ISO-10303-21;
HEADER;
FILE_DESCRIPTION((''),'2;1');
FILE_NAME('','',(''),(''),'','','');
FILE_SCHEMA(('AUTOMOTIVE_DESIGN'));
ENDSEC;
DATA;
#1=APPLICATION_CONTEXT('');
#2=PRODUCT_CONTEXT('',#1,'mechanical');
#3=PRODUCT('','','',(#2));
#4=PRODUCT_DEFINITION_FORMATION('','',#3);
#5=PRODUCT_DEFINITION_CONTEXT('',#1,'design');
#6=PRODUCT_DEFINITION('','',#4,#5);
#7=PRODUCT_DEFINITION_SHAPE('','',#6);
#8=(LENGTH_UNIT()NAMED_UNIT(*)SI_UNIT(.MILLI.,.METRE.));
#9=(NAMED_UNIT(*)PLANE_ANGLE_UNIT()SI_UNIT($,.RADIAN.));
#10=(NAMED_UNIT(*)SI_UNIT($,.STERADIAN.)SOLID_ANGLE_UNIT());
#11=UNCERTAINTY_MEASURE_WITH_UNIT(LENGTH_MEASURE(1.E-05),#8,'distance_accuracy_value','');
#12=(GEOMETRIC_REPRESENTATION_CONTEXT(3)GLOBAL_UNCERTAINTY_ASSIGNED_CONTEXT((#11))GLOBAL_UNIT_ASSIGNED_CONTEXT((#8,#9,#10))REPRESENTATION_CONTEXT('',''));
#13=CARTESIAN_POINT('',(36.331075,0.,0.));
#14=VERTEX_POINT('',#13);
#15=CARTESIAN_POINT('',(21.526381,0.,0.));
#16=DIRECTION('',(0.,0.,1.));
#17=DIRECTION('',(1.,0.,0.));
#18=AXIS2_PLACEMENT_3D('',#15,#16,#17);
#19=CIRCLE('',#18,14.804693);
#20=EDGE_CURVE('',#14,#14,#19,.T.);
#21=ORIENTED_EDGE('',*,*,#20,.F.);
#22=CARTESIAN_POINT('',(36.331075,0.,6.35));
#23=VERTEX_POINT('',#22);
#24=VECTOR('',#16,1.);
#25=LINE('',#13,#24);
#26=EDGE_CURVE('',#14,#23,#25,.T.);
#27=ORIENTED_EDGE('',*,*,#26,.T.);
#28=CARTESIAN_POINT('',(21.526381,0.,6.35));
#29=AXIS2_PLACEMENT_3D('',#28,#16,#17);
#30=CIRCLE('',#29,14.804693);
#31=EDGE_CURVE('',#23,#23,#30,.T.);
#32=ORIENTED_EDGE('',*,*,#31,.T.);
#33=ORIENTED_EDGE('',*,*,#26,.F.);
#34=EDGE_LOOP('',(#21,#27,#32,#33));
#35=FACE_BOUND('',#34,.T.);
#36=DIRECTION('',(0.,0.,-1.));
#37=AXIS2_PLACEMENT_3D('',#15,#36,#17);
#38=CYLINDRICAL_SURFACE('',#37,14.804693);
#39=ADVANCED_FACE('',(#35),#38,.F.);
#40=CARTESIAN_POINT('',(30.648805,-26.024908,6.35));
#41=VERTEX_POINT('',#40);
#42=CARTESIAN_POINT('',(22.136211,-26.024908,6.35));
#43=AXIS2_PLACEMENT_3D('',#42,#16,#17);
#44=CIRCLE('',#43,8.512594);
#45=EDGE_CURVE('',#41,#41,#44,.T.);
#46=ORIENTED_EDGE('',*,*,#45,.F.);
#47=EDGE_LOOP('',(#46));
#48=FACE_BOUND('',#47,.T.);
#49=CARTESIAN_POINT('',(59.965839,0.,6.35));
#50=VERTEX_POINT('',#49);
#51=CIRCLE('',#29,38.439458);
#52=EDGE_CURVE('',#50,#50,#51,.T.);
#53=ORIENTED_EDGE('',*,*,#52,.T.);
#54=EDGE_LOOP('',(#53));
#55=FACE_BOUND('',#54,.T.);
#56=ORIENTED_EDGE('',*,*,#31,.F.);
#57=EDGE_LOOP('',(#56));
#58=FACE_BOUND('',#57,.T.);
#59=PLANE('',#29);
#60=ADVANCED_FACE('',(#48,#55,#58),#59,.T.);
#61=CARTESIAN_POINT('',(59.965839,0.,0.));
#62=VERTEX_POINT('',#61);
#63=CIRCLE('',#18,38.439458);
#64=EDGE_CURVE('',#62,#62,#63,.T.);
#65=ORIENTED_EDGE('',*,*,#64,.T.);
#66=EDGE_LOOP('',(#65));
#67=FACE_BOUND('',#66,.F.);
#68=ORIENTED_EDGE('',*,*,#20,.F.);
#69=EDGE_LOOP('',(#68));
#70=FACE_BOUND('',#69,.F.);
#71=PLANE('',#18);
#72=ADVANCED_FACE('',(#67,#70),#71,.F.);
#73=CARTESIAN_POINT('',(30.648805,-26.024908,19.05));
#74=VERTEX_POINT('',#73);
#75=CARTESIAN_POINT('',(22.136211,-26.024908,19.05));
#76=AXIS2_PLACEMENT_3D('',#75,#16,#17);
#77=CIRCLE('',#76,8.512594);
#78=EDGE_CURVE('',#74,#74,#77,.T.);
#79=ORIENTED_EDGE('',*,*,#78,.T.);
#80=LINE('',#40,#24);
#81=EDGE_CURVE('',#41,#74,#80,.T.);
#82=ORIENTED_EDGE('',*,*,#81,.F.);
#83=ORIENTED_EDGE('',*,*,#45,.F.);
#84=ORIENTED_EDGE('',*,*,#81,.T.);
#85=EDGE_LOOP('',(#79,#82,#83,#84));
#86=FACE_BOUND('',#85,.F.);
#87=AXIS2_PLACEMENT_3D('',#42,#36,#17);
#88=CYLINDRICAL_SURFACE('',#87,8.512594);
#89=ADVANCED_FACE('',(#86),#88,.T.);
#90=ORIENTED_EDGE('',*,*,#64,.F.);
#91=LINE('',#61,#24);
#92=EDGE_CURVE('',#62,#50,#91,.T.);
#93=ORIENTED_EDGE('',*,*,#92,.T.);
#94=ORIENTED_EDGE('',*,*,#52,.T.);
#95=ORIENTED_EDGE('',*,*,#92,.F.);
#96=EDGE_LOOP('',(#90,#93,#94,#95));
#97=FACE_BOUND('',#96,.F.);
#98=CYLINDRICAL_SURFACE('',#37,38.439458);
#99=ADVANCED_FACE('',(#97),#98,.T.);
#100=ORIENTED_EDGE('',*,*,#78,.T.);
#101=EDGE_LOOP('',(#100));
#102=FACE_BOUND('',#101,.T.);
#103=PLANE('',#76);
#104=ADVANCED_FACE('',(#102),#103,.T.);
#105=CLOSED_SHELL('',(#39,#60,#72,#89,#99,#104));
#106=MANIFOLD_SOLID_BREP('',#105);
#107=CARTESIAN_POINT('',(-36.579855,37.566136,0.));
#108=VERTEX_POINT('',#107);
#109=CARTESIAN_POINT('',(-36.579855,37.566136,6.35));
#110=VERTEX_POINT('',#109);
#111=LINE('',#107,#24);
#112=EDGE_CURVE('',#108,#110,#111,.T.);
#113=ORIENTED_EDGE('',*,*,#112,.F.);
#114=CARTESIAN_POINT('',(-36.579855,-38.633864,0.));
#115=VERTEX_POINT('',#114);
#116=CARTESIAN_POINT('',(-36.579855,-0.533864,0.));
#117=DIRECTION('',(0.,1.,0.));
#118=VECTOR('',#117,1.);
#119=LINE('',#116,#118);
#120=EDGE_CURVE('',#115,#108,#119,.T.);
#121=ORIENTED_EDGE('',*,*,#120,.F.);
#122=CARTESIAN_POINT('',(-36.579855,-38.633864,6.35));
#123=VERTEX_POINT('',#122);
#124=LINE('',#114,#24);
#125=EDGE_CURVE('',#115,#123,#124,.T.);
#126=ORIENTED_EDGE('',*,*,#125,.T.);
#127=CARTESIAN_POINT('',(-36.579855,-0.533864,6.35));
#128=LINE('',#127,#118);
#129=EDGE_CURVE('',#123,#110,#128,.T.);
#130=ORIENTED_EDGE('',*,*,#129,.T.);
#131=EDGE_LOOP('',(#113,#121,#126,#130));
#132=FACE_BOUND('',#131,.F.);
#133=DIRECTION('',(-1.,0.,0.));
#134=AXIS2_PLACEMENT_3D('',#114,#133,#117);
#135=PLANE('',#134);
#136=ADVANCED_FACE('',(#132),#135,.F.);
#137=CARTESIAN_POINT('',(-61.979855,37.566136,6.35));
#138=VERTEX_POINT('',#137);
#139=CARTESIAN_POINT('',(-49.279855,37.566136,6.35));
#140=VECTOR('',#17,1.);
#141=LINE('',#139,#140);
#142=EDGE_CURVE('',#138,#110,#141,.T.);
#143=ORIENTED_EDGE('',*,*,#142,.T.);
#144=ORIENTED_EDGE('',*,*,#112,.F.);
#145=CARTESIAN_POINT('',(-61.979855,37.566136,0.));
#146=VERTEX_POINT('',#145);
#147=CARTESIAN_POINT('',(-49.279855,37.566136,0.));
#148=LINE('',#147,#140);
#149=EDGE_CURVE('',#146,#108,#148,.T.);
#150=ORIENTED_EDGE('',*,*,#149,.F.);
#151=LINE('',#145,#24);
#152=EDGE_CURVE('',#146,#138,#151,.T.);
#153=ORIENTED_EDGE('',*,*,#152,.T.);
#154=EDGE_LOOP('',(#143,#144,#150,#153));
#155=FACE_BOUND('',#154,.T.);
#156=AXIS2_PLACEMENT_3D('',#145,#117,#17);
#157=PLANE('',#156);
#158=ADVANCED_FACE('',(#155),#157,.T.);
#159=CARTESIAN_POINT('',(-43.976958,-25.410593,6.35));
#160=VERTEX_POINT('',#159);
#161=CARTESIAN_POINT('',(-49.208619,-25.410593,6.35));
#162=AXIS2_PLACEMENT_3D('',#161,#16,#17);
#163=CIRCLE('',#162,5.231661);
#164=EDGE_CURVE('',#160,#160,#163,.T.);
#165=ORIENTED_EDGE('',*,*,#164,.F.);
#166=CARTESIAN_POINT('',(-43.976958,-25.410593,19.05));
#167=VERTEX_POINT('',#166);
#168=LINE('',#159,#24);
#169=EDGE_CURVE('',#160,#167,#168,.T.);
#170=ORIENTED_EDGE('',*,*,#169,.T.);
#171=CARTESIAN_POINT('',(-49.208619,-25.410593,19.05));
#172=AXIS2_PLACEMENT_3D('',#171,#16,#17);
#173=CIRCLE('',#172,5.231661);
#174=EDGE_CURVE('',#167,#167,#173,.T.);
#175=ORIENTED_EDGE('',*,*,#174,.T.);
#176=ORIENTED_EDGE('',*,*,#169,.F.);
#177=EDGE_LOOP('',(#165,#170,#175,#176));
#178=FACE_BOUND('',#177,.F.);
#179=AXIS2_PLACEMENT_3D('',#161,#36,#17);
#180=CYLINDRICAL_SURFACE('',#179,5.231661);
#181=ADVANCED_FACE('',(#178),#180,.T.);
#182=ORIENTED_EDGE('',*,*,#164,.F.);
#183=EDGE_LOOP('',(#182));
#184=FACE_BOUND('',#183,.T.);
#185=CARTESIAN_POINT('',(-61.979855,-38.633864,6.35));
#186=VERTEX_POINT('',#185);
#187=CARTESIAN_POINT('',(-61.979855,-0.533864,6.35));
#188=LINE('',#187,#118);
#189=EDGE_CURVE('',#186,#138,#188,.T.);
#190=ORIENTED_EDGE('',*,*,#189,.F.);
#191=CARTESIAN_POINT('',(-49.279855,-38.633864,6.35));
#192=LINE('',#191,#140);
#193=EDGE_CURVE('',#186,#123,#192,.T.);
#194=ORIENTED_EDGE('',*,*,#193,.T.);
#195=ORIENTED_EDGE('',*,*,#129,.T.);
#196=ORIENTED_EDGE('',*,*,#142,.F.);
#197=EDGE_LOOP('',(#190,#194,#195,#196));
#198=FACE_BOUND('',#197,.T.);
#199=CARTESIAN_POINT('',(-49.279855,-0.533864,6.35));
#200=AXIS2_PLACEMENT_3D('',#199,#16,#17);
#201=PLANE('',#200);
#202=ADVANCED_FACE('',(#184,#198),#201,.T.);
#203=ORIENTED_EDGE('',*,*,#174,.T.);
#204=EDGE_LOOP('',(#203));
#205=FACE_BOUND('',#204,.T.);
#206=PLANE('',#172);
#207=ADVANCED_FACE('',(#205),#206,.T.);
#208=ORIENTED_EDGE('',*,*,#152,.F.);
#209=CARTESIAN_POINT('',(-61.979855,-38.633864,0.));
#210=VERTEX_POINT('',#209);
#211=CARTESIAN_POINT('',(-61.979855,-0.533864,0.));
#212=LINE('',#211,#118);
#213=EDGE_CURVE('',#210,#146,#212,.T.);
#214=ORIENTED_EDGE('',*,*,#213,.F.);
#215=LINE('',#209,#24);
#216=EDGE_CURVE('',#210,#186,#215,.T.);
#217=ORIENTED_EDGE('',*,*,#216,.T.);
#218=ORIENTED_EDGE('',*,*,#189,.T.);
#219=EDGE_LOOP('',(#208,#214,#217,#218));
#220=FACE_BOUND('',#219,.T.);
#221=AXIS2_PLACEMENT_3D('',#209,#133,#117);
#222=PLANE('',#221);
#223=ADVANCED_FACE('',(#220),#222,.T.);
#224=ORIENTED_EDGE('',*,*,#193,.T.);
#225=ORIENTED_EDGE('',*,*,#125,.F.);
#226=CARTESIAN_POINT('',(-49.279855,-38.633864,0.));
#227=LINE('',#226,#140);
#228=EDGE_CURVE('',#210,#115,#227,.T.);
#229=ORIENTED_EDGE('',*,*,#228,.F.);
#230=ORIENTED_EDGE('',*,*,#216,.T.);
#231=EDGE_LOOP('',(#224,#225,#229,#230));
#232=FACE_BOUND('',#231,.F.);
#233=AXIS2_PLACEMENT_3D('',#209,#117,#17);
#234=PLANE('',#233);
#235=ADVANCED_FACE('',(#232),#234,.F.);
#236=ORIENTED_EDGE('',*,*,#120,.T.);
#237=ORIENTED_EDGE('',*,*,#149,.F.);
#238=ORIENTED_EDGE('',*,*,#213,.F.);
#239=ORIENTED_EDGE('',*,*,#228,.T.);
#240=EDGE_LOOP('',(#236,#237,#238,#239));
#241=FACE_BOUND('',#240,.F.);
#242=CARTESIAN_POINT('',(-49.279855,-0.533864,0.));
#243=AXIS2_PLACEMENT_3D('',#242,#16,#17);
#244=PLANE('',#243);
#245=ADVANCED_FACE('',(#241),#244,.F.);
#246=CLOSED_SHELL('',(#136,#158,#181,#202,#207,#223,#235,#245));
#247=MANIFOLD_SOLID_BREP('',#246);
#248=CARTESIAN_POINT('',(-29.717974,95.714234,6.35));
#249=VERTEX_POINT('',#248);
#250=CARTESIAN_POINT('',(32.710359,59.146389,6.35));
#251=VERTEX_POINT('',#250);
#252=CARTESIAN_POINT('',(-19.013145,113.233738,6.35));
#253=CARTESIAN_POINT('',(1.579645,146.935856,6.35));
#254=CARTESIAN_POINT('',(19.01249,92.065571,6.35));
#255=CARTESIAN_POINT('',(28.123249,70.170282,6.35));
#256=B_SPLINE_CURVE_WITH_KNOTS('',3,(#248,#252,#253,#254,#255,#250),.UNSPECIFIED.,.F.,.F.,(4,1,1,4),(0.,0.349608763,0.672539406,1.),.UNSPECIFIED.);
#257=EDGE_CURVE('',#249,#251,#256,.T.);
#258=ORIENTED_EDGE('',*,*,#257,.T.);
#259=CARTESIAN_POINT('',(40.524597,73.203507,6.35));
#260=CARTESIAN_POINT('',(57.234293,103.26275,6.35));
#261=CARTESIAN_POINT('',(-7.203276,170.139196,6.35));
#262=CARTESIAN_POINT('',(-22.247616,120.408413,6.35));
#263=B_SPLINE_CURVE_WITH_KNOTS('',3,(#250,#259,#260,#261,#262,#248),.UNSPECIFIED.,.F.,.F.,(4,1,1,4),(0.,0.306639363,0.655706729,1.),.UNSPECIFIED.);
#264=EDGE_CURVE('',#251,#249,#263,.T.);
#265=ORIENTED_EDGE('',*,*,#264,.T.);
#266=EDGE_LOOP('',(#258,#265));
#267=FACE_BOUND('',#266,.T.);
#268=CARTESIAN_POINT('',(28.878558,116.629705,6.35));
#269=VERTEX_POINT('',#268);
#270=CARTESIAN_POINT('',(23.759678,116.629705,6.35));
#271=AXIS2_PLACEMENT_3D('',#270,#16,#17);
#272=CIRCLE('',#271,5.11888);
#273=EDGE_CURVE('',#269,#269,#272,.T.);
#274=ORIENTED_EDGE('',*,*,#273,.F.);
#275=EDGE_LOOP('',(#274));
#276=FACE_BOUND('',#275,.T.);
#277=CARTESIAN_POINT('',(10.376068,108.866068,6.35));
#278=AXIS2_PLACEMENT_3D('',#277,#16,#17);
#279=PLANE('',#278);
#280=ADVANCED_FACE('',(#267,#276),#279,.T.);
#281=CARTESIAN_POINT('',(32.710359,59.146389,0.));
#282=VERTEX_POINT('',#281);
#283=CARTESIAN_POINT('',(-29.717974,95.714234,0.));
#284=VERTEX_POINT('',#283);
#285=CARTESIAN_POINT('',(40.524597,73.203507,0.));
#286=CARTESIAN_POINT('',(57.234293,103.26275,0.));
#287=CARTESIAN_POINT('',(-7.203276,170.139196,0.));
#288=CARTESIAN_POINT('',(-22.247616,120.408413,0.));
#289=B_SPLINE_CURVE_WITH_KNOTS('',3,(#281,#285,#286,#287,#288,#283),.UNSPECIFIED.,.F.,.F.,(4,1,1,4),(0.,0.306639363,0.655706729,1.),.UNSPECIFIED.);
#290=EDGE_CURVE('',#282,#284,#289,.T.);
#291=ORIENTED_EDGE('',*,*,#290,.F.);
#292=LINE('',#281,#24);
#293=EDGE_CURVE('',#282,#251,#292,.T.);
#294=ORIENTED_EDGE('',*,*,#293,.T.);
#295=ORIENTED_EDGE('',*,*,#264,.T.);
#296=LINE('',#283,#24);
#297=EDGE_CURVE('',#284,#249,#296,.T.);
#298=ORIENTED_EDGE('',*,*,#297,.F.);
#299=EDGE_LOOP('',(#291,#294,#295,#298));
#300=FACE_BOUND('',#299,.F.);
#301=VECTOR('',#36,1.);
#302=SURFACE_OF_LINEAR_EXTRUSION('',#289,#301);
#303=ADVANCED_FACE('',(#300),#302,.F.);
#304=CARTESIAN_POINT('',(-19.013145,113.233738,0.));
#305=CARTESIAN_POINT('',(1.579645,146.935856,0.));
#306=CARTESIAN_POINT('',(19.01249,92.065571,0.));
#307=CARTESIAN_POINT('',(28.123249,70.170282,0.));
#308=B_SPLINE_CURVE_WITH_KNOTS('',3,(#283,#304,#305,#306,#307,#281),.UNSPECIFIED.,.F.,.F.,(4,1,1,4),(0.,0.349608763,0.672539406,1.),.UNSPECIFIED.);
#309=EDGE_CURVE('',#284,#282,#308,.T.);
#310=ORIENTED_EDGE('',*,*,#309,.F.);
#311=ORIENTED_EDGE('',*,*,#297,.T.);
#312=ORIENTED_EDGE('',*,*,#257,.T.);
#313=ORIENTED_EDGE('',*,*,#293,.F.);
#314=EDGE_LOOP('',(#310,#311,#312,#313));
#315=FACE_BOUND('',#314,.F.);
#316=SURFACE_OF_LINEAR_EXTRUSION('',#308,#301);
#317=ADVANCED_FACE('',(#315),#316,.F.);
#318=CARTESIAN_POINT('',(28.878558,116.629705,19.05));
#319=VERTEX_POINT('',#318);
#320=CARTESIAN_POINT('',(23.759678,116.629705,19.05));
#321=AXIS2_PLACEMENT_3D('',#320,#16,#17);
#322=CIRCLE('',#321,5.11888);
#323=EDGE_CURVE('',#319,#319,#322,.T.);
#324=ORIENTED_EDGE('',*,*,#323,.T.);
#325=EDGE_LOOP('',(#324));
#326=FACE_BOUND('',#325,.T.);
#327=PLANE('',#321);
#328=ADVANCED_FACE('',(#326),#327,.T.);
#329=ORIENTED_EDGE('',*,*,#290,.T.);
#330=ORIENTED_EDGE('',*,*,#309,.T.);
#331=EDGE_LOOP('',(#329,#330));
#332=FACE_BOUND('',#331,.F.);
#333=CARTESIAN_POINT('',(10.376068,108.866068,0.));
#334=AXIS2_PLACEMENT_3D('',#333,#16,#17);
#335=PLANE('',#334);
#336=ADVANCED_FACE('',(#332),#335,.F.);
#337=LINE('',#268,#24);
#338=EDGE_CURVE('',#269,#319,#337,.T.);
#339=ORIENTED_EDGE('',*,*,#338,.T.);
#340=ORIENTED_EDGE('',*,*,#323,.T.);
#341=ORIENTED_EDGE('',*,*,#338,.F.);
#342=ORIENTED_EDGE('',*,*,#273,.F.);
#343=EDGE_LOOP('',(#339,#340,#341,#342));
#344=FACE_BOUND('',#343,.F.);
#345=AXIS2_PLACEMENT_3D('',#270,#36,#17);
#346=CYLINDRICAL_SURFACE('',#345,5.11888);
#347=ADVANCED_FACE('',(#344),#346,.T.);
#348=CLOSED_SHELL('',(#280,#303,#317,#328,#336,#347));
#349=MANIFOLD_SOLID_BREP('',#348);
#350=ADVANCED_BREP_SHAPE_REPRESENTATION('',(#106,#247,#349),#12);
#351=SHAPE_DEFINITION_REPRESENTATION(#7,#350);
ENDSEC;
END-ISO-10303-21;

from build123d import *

# Parameters (mm, degrees)
F0_W     = 25.4
F0_H     = 76.2
F1_DEPTH = 6.35
F0_R     = 38.4394579133
F0_R_2   = 14.8046934969
F2_R     = 5.2316610028
F3_DEPTH = 12.7
F2_R_2   = 8.5125938891
F2_R_3   = 5.1188797051


with BuildPart() as f1:
    # F0 (on Top) → F1 (new body)
    with BuildSketch(Plane.XY):
        with Locations((-49.2798545945, -0.5338639021)):
            Rectangle(F0_W, F0_H)
    extrude(amount=F1_DEPTH)

    # F2 (on face) → F3 (join)
    with BuildSketch(Plane.XY.offset(6.35)):
        with Locations((-49.2086187005, -25.410592556)):
            Circle(F2_R)
    extrude(amount=F3_DEPTH)


with BuildPart() as f1b:
    # F0 (on Top) → F1, piece 2 (new body)
    with BuildSketch(Plane.XY):
        with Locations((21.5263813734, 0)):
            Circle(F0_R)
        with Locations((21.5263813734, 0)):
            Circle(F0_R_2, mode=Mode.SUBTRACT)
    extrude(amount=F1_DEPTH)

    # F2 (on face) → F3, piece 2 (join)
    with BuildSketch(Plane.XY.offset(6.35)):
        with Locations((22.1362113953, -26.0249078274)):
            Circle(F2_R_2)
    extrude(amount=F3_DEPTH)


with BuildPart() as f1c:
    # F0 (on Top) → F1, piece 3 (new body)
    with BuildSketch(Plane.XY):
        with BuildLine():
            add(Edge.make_bspline(
                [(-29.7179743648, 95.7142338157), (-19.0131454807, 113.233737551), (1.5796451251, 146.9358558674), (19.0124895635, 92.0655705958), (28.123248858, 70.1702824146), (32.7103585005, 59.1463893652)],
                knots=[0, 0, 0, 0, 0.3496087633, 0.6725394057, 1, 1, 1, 1], degree=3))
            add(Edge.make_bspline(
                [(32.7103585005, 59.1463893652), (40.5245970676, 73.2035069742), (57.2342930122, 103.2627499743), (-7.2032755891, 170.1391956814), (-22.2476159218, 120.4084125144), (-29.7179743648, 95.7142338157)],
                knots=[0, 0, 0, 0, 0.3066393633, 0.6557067286, 1, 1, 1, 1], degree=3))
        make_face()
    extrude(amount=F1_DEPTH)

    # F2 (on face) → F3, piece 3 (join)
    with BuildSketch(Plane.XY.offset(6.35)):
        with Locations((23.7596780062, 116.629704833)):
            Circle(F2_R_3)
    extrude(amount=F3_DEPTH)


solid = Compound([f1.part, f1b.part, f1c.part])
